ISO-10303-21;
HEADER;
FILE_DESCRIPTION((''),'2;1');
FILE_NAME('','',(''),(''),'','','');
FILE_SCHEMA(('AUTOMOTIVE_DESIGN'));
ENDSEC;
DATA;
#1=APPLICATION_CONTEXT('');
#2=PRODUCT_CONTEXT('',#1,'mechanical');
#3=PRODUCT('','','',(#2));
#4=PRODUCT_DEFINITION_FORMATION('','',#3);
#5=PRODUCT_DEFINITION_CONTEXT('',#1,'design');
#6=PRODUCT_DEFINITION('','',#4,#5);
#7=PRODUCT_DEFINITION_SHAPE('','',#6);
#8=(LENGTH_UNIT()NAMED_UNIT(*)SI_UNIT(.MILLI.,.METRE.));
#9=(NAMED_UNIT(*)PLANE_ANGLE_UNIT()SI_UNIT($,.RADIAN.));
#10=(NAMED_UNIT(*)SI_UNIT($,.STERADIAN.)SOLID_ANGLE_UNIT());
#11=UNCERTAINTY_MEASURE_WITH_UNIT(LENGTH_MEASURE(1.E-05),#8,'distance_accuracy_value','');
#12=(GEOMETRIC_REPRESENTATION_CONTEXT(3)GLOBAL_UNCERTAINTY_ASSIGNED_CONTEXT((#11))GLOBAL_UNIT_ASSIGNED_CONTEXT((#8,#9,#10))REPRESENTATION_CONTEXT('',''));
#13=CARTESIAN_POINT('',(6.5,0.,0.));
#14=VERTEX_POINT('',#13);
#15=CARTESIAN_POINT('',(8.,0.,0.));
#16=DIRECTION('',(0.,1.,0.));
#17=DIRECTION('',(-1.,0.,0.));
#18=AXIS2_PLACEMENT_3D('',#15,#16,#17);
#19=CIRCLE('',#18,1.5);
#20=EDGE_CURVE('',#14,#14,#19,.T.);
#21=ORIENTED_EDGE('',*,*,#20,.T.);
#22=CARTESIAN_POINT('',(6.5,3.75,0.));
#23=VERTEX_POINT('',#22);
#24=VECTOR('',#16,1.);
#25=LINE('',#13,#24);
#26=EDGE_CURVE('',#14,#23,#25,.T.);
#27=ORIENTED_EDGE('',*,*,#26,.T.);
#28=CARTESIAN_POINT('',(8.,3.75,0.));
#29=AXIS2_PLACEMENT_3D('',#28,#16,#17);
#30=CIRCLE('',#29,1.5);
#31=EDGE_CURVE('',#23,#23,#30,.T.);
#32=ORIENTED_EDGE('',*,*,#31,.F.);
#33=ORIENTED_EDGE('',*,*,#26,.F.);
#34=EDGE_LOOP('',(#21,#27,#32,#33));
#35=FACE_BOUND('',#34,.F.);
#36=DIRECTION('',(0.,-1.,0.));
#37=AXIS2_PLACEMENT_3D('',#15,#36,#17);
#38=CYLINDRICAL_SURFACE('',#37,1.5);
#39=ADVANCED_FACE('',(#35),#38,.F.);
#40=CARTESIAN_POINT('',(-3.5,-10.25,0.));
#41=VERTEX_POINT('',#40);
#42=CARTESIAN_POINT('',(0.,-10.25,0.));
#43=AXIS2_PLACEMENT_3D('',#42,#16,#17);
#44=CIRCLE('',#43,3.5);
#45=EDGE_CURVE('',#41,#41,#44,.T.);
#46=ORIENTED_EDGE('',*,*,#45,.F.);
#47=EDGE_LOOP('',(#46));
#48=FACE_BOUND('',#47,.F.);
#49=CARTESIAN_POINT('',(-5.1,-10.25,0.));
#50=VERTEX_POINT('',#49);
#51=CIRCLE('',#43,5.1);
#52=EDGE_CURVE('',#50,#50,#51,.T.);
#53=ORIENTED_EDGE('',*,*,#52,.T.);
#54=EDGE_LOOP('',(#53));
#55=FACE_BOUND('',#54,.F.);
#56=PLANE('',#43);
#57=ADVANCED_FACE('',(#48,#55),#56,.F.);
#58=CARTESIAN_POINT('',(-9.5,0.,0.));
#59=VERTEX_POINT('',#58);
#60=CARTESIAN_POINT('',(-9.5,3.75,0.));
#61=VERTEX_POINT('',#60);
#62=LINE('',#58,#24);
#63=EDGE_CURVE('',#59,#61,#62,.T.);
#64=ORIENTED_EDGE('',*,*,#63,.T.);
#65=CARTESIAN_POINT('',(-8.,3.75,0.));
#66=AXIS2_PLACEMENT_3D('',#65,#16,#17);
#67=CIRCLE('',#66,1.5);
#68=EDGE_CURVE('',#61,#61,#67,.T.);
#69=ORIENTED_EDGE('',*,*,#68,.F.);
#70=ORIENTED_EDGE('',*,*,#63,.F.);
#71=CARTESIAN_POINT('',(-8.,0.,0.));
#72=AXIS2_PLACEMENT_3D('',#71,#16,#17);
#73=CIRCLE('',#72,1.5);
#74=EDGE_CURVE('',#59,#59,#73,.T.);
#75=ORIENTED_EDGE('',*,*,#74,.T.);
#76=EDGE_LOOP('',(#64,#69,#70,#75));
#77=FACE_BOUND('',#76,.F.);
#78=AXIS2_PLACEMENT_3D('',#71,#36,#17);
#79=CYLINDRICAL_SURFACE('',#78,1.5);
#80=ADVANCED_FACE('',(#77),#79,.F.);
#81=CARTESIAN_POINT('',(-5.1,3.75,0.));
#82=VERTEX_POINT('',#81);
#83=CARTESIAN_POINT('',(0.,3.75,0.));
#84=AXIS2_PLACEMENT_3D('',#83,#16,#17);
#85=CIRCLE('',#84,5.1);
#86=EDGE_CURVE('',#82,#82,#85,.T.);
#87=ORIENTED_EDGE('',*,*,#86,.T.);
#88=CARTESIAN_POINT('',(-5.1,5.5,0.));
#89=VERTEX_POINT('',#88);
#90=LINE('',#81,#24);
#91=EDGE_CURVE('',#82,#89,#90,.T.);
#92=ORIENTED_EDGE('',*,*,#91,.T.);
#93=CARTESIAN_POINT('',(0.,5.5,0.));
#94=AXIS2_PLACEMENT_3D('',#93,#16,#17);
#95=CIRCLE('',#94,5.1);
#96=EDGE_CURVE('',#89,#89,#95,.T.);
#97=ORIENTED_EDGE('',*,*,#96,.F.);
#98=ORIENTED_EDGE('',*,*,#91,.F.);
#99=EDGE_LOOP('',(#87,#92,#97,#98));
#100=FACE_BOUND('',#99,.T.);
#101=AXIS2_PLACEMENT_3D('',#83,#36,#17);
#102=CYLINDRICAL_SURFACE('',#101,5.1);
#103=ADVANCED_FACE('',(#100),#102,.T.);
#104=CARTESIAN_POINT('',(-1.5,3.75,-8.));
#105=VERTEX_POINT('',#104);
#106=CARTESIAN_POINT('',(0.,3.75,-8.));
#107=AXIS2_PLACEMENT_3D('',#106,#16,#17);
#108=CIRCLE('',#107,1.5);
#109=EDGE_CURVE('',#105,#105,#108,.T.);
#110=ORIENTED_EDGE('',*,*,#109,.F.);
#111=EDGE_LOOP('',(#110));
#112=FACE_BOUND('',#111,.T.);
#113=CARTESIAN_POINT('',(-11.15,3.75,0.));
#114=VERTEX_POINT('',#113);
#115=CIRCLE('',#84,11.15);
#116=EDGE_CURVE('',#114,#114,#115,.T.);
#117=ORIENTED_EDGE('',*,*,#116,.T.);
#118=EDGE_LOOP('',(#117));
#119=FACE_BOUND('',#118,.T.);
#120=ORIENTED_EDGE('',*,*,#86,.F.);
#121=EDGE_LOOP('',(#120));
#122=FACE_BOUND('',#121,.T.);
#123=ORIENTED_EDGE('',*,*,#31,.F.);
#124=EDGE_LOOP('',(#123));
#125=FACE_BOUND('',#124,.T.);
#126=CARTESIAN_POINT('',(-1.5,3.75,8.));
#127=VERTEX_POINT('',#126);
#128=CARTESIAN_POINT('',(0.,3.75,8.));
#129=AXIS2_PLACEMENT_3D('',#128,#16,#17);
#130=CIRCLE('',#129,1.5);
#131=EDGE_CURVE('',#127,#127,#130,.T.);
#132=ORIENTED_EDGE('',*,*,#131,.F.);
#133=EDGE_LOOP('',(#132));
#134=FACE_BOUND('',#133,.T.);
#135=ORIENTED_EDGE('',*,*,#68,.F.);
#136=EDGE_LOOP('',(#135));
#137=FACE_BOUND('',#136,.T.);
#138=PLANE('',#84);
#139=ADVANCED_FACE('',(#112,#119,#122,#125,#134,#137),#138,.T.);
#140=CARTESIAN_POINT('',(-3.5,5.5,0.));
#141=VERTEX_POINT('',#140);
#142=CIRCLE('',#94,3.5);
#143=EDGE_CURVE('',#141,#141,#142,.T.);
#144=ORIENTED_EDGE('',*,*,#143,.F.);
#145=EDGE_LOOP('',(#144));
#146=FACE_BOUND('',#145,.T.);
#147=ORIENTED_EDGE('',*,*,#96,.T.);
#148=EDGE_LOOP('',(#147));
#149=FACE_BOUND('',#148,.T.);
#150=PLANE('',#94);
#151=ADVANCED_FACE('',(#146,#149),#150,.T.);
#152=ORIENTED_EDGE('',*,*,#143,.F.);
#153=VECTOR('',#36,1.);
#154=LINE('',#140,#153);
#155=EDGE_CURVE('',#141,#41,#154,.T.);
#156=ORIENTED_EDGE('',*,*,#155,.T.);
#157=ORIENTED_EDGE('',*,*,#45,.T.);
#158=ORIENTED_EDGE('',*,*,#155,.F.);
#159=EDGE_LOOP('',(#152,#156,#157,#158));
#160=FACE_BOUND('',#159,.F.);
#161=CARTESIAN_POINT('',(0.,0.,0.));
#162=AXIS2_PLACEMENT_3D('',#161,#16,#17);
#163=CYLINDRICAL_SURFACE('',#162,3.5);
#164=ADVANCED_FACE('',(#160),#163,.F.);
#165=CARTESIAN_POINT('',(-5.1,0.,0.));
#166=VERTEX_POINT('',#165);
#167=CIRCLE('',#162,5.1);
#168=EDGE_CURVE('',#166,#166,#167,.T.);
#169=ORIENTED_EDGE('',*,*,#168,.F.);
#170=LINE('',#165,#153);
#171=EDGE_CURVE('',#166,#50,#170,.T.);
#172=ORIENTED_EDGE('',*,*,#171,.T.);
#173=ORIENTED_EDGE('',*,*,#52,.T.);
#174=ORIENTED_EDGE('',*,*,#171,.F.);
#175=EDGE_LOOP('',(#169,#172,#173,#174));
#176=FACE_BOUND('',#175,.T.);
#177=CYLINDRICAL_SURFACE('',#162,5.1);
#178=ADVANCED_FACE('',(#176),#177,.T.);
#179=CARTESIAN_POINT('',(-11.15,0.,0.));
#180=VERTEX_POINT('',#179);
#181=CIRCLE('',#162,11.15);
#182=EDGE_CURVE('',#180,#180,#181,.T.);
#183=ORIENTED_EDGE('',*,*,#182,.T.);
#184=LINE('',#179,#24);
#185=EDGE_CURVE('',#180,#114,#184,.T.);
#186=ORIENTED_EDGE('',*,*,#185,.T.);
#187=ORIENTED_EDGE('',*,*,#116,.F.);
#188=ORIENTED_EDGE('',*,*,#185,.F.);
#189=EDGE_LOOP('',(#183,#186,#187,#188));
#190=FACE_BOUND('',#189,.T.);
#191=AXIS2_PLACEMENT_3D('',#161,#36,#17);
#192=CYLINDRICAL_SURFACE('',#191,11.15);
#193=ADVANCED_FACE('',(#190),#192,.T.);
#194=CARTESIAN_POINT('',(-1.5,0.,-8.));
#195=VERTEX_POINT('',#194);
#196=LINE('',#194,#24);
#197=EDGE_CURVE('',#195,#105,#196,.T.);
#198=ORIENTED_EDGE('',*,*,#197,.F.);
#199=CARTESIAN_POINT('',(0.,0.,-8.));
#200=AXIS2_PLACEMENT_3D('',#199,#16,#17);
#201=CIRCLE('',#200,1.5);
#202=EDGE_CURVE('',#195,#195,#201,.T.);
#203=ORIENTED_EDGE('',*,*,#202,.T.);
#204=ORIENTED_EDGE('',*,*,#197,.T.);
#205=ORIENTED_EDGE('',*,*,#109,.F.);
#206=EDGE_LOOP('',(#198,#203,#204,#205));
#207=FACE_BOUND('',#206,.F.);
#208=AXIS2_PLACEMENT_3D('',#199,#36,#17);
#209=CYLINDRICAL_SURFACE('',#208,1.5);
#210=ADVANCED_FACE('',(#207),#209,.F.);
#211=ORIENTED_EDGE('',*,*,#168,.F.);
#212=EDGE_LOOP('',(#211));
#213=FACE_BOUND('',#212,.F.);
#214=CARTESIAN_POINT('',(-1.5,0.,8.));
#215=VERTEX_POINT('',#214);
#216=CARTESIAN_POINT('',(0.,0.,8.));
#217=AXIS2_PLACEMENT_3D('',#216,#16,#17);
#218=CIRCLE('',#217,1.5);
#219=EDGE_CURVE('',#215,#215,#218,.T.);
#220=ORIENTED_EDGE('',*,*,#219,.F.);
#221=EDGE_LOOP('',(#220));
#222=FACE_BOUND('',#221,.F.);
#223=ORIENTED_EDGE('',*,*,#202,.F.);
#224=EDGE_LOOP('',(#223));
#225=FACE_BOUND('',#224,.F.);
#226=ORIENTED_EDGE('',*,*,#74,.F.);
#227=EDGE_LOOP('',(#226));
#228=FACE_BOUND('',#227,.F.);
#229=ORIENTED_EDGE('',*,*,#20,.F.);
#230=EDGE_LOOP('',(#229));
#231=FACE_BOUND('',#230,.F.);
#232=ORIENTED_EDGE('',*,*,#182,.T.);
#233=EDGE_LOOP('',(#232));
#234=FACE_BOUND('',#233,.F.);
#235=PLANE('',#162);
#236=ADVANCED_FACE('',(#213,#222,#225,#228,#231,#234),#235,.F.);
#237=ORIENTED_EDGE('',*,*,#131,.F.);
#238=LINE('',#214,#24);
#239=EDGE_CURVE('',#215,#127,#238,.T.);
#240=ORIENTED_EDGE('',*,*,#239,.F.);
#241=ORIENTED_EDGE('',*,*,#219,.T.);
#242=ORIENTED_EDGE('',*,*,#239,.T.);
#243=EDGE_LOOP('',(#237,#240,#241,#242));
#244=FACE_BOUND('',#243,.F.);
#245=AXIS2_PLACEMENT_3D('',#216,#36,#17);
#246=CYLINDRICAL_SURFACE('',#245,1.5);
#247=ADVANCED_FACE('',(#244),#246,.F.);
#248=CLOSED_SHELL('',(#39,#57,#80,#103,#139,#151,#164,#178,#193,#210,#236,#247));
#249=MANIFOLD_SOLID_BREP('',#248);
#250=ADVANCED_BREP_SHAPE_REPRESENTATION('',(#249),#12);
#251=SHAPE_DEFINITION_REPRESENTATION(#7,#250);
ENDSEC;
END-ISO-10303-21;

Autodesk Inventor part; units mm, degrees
ref_plane "YZ Plane" through (0, 0, 0) normal (1, 0, 0) x (0, 1, 0)
ref_plane "XZ Plane" through (0, 0, 0) normal (0, 1, 0) x (-1, 0, 0)
ref_plane "XY Plane" through (0, 0, 0) normal (0, 0, 1) x (1, 0, 0)
sketch "Sketch1" plane through (0, 0, 0) normal (0, 1, 0) x (-1, 0, 0)
  circle A0 centre (0, 0) radius 11.15
  circle A1 centre (0, 0) radius 3.5
  circle A2 centre (8, 0) radius 1.5
  line L0 (8, 0) -> (0, 0) construction
  circle A3 centre (0, 8) radius 1.5
  circle A4 centre (-8, 0) radius 1.5
  circle A5 centre (0, -8) radius 1.5
  circle A6 centre (0, 0) radius 5.1
  dimension "d0" = 22.3
  dimension "d1" = 7
  dimension "d2" = 3
  dimension "d3" = 8
  dimension "d6" = 360
  dimension "d8" = 10.2
extrude "Extrusion1" add sketch "Sketch1" along normal blind 3.75 contours A0 | A6
extrude "Extrusion2" add sketch "Sketch1" along normal blind 1.75 from surface at 3.75 contours A6
extrude "Extrusion3" add sketch "Sketch1" against normal blind 10.25 contours A6
properties part number "Leadscrew"
